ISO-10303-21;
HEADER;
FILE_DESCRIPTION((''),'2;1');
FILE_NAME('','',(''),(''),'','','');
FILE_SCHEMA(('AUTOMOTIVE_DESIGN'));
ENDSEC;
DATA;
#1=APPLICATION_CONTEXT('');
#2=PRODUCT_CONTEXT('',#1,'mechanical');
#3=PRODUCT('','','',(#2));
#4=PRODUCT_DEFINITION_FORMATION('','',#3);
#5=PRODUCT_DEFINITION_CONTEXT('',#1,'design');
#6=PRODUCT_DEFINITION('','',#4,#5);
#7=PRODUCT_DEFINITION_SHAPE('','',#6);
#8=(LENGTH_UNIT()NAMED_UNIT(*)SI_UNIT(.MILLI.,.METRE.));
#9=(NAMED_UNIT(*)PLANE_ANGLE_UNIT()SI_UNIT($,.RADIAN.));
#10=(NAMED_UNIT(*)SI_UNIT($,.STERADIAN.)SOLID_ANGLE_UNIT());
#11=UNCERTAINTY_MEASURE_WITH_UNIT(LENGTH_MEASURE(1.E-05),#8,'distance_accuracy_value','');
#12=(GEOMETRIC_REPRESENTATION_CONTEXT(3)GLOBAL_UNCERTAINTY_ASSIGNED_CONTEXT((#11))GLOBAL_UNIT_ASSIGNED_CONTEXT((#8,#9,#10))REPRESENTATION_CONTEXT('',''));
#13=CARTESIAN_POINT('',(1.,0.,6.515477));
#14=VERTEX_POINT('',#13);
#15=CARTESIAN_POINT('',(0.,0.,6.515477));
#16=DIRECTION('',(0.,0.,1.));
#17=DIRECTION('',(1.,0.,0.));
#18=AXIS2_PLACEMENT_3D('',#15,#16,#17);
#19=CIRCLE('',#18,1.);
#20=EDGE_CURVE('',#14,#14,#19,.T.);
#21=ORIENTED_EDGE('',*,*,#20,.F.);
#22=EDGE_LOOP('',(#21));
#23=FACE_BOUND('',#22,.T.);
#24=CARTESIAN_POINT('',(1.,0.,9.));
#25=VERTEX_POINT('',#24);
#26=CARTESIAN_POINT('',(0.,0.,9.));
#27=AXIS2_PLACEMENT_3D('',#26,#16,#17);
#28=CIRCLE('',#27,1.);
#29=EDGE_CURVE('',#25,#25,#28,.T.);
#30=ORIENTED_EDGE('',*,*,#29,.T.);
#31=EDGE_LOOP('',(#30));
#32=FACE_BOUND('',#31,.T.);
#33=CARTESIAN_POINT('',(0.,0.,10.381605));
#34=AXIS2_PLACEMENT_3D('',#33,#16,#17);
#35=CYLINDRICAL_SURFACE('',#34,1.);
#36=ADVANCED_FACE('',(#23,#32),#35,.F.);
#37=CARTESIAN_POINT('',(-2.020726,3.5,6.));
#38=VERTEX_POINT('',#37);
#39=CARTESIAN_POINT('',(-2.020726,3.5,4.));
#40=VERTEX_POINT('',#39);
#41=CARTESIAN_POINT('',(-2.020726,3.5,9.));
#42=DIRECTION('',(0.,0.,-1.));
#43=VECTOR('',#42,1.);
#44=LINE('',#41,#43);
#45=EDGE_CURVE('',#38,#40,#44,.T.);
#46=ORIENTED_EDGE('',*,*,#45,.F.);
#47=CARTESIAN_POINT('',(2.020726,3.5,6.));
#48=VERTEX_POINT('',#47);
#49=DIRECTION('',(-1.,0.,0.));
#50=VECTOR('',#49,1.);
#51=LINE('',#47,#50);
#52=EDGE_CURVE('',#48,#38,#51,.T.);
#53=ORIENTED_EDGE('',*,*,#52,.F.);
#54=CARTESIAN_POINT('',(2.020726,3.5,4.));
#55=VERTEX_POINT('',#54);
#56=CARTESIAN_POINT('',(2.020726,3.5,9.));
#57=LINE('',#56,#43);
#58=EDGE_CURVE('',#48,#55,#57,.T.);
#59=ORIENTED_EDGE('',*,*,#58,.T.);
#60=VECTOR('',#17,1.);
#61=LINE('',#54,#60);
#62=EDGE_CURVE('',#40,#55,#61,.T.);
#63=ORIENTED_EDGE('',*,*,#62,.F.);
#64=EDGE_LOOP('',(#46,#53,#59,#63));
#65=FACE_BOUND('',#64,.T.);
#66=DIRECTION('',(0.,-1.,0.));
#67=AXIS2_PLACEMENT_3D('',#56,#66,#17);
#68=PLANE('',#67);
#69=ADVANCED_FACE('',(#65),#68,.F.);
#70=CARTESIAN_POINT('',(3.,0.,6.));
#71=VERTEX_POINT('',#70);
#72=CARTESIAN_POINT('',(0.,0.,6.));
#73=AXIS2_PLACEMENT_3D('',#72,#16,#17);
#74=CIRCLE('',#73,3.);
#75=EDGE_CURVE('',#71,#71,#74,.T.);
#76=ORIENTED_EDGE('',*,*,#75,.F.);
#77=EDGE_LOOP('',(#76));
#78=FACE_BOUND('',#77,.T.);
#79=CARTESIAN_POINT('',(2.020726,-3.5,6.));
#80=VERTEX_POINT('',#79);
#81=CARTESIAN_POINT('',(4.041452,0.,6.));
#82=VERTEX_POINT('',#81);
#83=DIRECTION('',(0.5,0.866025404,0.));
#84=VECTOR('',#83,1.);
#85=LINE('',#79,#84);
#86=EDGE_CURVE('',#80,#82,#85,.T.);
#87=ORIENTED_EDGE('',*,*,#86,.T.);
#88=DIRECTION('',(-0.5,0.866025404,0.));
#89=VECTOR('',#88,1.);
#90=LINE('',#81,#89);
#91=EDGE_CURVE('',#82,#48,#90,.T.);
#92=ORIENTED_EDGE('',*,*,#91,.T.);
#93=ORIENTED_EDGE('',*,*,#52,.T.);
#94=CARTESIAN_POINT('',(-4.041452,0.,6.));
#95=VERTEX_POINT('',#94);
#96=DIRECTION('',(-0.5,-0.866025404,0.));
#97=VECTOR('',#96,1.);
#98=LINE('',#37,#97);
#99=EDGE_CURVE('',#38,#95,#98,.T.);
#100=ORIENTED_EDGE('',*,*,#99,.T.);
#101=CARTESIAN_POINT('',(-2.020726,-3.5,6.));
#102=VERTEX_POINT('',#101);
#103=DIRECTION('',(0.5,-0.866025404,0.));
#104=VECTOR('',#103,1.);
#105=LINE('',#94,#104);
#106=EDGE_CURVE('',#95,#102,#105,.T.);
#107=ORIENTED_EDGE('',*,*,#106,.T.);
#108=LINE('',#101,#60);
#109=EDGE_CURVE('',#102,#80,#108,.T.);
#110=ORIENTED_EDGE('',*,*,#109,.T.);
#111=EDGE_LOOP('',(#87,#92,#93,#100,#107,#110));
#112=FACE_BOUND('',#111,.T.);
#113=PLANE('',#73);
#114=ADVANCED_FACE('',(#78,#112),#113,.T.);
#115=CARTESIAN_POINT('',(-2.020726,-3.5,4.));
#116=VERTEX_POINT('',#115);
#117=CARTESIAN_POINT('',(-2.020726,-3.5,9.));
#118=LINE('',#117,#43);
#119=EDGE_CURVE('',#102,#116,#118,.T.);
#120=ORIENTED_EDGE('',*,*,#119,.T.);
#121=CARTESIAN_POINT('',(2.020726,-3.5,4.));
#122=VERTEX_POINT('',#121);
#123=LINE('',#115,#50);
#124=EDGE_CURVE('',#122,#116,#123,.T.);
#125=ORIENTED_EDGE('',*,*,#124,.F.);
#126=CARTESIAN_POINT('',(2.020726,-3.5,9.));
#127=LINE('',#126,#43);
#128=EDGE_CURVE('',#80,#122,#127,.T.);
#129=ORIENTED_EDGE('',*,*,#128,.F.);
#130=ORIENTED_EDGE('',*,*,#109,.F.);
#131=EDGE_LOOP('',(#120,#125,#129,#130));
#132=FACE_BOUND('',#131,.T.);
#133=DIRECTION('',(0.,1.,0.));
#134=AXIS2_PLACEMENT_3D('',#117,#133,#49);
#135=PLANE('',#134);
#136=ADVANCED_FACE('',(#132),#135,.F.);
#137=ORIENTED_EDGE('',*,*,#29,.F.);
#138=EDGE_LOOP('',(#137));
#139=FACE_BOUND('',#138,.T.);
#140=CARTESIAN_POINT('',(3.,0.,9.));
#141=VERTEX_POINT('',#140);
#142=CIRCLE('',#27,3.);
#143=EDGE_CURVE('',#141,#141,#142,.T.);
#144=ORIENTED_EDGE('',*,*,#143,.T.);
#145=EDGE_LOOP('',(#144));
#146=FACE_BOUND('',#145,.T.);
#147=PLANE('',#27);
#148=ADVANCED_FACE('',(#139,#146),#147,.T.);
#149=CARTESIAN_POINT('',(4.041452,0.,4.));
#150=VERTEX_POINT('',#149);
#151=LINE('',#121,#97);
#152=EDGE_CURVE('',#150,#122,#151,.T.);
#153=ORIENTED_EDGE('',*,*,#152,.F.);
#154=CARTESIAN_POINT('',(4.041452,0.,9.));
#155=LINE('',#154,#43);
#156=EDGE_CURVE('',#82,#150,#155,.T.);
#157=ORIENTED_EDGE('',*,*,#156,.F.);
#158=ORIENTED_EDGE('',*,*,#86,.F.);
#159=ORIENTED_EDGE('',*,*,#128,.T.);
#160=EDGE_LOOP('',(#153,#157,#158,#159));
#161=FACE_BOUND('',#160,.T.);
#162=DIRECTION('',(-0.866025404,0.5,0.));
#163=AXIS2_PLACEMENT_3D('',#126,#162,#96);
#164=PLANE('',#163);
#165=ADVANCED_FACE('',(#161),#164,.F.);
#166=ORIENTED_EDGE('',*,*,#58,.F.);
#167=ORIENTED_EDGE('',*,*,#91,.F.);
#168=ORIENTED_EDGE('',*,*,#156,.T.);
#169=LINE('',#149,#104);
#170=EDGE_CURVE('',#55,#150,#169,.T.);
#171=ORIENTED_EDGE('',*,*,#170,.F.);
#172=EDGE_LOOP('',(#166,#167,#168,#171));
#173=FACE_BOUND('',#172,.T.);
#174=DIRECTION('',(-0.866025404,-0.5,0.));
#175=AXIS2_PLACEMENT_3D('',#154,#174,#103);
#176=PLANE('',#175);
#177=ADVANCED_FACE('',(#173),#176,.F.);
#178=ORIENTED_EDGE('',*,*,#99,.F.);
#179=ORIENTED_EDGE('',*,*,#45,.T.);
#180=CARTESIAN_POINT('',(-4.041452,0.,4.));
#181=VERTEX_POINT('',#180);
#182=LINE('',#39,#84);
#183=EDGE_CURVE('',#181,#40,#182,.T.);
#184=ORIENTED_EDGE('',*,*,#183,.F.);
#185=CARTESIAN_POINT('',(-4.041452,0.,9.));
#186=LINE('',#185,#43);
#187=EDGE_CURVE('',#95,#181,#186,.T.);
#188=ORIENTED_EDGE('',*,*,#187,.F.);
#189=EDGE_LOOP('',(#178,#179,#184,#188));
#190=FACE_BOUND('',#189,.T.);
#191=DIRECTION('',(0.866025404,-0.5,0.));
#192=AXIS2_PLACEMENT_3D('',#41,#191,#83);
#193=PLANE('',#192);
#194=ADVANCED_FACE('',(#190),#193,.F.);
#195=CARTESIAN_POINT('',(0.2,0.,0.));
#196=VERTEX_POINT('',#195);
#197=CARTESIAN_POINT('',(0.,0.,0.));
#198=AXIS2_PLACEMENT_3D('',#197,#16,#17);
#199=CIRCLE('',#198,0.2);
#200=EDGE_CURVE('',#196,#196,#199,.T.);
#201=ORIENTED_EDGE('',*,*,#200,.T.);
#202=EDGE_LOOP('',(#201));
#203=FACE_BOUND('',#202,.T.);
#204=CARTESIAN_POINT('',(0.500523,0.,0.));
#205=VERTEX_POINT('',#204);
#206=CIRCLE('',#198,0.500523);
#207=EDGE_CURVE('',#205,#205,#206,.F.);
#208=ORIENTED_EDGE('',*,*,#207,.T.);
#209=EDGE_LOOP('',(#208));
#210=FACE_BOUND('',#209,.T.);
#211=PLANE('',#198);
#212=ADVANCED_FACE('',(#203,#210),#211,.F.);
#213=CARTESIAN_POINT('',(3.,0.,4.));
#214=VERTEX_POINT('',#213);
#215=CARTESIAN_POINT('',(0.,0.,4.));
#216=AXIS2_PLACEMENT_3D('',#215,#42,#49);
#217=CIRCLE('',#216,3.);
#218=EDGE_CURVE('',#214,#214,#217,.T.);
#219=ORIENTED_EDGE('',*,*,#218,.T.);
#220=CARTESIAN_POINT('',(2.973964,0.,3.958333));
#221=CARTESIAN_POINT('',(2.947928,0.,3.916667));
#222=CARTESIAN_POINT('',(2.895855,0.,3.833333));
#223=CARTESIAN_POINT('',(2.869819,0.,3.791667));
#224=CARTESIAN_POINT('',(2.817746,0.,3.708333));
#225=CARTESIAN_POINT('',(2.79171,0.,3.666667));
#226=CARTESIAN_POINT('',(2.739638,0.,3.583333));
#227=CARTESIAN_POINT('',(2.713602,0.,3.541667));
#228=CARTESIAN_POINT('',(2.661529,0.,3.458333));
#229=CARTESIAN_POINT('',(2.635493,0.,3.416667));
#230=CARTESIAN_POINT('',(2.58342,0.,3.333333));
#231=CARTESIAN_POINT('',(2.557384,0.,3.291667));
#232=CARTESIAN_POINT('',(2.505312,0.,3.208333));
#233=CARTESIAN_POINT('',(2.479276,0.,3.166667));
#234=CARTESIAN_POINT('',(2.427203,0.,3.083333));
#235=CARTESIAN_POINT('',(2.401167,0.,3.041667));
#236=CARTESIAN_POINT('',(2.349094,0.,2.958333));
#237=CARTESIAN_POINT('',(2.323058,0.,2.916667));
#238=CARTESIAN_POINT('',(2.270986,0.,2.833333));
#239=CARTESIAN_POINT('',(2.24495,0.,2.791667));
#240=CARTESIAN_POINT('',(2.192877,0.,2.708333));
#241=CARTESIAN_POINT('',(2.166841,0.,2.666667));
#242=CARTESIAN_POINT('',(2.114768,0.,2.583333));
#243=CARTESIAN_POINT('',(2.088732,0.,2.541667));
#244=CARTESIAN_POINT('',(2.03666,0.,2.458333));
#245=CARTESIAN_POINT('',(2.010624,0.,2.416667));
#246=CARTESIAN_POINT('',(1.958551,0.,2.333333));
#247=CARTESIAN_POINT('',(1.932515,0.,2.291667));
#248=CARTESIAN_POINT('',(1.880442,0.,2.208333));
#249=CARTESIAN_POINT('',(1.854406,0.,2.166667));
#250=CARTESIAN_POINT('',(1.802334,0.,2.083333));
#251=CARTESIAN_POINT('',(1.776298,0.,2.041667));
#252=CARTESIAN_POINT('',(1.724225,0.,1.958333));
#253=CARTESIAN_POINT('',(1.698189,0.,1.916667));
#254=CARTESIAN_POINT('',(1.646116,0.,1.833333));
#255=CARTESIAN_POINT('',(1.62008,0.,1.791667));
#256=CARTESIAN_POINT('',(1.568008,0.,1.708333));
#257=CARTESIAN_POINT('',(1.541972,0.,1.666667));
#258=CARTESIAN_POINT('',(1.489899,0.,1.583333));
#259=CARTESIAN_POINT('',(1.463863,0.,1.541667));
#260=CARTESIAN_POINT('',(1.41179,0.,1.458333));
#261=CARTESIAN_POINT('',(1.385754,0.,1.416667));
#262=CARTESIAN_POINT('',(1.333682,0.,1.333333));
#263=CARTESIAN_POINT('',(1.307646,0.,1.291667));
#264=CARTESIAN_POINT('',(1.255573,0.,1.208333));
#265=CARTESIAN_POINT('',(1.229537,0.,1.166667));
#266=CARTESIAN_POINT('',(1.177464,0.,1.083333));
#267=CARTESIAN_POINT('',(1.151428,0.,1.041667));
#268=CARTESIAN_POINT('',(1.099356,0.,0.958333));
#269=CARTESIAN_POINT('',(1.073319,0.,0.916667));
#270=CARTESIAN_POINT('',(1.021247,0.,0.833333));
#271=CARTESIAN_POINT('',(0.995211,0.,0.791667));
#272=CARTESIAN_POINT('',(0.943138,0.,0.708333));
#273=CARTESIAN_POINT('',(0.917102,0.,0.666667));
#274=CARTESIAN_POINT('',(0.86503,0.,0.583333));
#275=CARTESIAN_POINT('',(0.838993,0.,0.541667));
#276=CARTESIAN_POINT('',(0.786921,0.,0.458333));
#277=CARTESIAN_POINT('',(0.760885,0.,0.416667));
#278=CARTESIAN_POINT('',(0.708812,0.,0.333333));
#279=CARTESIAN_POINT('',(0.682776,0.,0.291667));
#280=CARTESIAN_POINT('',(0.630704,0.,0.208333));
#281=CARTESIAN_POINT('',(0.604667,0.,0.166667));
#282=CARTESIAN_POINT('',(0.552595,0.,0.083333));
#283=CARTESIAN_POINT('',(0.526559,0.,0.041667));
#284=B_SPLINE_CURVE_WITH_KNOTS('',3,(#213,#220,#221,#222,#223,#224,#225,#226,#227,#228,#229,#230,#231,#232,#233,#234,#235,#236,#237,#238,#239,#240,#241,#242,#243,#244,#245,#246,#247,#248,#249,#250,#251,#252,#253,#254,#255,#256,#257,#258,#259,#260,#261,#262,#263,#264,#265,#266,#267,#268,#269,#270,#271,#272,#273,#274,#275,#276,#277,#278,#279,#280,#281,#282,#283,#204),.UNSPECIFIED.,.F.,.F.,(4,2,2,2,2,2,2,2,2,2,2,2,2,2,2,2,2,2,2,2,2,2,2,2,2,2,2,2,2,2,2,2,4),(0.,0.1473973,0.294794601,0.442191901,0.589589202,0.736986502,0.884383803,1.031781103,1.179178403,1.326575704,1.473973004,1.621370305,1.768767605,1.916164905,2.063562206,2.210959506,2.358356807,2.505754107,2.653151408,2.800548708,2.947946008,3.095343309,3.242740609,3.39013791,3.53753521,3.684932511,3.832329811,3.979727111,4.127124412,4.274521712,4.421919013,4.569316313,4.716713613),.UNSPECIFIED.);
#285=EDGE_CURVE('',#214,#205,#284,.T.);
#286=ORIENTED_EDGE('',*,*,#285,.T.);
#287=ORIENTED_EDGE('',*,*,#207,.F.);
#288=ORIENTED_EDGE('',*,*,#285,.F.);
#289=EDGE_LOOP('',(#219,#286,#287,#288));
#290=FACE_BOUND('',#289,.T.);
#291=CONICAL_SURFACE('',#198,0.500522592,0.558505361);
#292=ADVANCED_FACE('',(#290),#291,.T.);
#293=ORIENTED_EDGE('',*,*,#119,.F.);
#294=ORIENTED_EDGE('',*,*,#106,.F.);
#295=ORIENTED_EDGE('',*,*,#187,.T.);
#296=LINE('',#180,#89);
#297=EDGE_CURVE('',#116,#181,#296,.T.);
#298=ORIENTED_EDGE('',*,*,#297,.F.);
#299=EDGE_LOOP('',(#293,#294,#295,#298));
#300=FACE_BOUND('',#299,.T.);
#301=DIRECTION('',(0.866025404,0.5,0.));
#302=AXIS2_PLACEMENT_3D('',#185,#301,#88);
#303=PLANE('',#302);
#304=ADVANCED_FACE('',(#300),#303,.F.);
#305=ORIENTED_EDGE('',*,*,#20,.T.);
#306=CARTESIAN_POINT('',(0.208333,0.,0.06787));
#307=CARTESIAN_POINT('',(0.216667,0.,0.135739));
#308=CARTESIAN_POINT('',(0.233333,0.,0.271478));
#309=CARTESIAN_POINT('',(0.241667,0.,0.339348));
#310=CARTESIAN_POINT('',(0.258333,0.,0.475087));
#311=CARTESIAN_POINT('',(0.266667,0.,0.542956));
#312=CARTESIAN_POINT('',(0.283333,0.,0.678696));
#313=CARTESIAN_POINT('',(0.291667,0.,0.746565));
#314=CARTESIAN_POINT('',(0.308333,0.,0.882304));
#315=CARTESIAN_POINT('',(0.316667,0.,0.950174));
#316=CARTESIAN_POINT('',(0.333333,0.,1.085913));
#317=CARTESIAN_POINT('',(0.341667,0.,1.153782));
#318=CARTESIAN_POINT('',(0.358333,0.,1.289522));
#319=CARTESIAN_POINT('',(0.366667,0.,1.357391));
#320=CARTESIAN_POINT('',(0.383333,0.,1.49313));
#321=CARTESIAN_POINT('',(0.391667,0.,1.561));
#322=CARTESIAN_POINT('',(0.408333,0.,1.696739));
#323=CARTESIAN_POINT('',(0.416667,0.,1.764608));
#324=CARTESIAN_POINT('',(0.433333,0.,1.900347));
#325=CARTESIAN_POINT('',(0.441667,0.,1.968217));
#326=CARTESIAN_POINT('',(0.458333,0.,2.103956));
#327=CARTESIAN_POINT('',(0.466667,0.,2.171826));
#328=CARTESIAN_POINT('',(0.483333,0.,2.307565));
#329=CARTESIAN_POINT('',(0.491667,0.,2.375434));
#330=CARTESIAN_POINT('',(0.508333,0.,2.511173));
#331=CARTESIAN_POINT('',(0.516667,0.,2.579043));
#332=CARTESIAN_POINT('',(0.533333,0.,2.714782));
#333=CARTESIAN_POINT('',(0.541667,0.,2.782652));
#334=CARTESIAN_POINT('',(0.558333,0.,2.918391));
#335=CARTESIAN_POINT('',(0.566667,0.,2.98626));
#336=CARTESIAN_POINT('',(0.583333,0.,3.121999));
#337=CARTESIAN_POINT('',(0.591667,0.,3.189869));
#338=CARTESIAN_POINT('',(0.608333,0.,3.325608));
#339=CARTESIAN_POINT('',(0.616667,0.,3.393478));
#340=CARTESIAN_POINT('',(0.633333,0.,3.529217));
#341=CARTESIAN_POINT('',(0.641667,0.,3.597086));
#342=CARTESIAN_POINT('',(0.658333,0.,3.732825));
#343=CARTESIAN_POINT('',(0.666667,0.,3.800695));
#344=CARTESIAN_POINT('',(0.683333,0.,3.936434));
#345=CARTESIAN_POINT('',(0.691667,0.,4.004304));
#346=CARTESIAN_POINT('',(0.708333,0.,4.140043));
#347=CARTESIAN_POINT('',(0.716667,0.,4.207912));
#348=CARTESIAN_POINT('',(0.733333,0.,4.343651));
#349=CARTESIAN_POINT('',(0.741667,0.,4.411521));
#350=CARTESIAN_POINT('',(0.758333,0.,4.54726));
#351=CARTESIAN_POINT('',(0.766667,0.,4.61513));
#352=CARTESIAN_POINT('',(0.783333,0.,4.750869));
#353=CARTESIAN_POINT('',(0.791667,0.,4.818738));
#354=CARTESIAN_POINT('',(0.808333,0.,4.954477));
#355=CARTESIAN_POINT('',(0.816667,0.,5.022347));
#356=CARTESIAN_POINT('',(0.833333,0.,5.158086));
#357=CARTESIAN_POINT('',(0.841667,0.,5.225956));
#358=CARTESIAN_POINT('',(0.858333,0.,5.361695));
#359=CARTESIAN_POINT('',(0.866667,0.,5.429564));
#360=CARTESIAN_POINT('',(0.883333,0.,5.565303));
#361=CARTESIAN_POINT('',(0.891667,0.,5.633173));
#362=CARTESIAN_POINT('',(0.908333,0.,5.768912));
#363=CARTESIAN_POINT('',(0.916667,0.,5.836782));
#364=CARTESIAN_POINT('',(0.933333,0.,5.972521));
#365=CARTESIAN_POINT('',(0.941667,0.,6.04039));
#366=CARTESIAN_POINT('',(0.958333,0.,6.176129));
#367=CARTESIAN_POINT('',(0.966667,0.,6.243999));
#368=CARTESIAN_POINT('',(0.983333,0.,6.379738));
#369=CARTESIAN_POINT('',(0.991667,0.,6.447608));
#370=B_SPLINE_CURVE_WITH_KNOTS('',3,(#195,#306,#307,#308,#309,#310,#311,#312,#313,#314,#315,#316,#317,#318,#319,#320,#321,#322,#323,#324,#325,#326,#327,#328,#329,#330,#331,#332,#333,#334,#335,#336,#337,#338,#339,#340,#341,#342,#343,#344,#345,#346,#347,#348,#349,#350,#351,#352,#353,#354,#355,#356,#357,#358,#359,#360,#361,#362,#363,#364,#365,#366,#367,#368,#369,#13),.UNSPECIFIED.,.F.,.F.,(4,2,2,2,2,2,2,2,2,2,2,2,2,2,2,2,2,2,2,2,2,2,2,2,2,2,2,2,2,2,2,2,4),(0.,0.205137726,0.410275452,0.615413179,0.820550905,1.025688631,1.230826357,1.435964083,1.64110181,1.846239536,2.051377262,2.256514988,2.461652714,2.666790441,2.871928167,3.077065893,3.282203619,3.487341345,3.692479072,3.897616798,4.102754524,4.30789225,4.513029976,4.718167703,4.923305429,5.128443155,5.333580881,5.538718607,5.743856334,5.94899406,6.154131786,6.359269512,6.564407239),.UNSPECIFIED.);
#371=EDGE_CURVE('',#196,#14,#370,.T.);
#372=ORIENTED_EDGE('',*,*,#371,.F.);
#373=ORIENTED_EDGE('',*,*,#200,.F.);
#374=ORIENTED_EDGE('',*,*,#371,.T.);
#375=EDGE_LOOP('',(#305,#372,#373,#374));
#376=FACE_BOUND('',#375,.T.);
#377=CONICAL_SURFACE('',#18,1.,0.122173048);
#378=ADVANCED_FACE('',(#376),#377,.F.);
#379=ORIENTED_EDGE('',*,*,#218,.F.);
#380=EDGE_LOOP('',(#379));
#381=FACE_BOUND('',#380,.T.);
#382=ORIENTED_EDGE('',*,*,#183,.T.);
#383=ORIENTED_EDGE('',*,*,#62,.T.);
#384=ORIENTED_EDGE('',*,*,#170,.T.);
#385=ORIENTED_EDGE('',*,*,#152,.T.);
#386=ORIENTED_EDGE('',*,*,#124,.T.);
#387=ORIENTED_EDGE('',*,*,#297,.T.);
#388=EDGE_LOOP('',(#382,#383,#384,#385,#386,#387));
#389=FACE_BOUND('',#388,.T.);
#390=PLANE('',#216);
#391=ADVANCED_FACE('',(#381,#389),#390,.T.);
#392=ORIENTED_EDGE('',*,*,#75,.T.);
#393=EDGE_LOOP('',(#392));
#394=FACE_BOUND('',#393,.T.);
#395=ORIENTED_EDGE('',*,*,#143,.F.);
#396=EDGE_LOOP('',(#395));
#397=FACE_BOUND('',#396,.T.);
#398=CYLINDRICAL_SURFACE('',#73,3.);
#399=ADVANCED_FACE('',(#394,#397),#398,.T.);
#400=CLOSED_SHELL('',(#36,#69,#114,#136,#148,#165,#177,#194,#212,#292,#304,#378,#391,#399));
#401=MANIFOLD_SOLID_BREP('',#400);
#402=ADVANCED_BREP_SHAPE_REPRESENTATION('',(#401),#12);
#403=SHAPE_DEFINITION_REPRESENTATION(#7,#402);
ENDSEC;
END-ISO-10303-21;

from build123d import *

# Parameters (mm, degrees)
BOSS_EXTRU_1_DEPTH      = 9
ESQUISSE2_W             = 19.623971562
ESQUISSE2_H             = 15.534154535
ESQUISSE2_R             = 3
ENL_V_MAT_EXTRU_1_DEPTH = 3
ENL_V_START             = -4
ESQUISSE3_W             = 11.267201257
ESQUISSE3_H             = 13.961169169
ESQUISSE3_R             = 3
ENL_V_MAT_EXTRU_2_DEPTH = 4
CHANFREIN1_SIZE         = 4
CHANFREIN1_SIZE_2       = 2.499477408


with BuildPart() as part:
    # Esquisse1 → Boss.-Extru.1 (new body)
    with BuildSketch(Plane.XY):
        Polygon((4.041451884, 0), (2.020725942, 3.5), (-2.020725942, 3.5), (-4.041451884, 0), (-2.020725942, -3.5), (2.020725942, -3.5), align=None)
    extrude(amount=BOSS_EXTRU_1_DEPTH)

    # Esquisse2 → Enlèv. mat.-Extru.1 (cut)
    with BuildSketch(Plane.XY.offset(9)):
        with Locations((0.327116653, -1.544441398)):
            Rectangle(ESQUISSE2_W, ESQUISSE2_H)
        Circle(ESQUISSE2_R, mode=Mode.SUBTRACT)
    extrude(amount=-ENL_V_MAT_EXTRU_1_DEPTH, mode=Mode.SUBTRACT)

    # Esquisse3 → Enlèv. mat.-Extru.2 (cut)
    with BuildSketch(Plane(origin=(0, 0, 0), x_dir=(-1, 0, 0), z_dir=(0, 0, -1)).offset(ENL_V_START)):
        with Locations((0.009770186, 0.039262349)):
            Rectangle(ESQUISSE3_W, ESQUISSE3_H)
        with Locations(Location((0, 0, 0), (0, 0, 180))):
            Circle(ESQUISSE3_R, mode=Mode.SUBTRACT)
    extrude(amount=ENL_V_MAT_EXTRU_2_DEPTH, mode=Mode.SUBTRACT)

    # Chanfrein1
    # the kernel refuses this chamfer: 4, 2.499477408 mm, written as the material it takes off along each edge
    with BuildSketch(Plane(origin=(0, 0, 0), x_dir=(1, 0, 0), z_dir=(0, 1, 0))) as chanfrein1_piece_1_section:
        Polygon((3, -CHANFREIN1_SIZE), (3 - CHANFREIN1_SIZE_2, 0), (3, 0), align=None)
    chanfrein1_piece_1 = revolve(axis=Axis((0, 0, 0), (0, 0, -1)), mode=Mode.PRIVATE)
    chanfrein1_piece_1 = split(chanfrein1_piece_1, bisect_by=Plane(origin=(-1.744026904, 0, 4), z_dir=(0, 0, -1)), keep=Keep.TOP, mode=Mode.PRIVATE)
    add(chanfrein1_piece_1, mode=Mode.SUBTRACT)

    # Esquisse4 → Enlèvement de matière-Révolution1 (revolve, cut)
    with BuildSketch(Plane(origin=(0, 0, 0), x_dir=(1, 0, 0), z_dir=(0, 1, 0))):
        Polygon((0, -9), (1, -9), (1, -6.515477142), (0.2, 0), (0, 0), align=None)
    revolve(axis=Axis((0, 0, 10.381605157), (0, 0, -1)), mode=Mode.SUBTRACT)


solid = part.part
